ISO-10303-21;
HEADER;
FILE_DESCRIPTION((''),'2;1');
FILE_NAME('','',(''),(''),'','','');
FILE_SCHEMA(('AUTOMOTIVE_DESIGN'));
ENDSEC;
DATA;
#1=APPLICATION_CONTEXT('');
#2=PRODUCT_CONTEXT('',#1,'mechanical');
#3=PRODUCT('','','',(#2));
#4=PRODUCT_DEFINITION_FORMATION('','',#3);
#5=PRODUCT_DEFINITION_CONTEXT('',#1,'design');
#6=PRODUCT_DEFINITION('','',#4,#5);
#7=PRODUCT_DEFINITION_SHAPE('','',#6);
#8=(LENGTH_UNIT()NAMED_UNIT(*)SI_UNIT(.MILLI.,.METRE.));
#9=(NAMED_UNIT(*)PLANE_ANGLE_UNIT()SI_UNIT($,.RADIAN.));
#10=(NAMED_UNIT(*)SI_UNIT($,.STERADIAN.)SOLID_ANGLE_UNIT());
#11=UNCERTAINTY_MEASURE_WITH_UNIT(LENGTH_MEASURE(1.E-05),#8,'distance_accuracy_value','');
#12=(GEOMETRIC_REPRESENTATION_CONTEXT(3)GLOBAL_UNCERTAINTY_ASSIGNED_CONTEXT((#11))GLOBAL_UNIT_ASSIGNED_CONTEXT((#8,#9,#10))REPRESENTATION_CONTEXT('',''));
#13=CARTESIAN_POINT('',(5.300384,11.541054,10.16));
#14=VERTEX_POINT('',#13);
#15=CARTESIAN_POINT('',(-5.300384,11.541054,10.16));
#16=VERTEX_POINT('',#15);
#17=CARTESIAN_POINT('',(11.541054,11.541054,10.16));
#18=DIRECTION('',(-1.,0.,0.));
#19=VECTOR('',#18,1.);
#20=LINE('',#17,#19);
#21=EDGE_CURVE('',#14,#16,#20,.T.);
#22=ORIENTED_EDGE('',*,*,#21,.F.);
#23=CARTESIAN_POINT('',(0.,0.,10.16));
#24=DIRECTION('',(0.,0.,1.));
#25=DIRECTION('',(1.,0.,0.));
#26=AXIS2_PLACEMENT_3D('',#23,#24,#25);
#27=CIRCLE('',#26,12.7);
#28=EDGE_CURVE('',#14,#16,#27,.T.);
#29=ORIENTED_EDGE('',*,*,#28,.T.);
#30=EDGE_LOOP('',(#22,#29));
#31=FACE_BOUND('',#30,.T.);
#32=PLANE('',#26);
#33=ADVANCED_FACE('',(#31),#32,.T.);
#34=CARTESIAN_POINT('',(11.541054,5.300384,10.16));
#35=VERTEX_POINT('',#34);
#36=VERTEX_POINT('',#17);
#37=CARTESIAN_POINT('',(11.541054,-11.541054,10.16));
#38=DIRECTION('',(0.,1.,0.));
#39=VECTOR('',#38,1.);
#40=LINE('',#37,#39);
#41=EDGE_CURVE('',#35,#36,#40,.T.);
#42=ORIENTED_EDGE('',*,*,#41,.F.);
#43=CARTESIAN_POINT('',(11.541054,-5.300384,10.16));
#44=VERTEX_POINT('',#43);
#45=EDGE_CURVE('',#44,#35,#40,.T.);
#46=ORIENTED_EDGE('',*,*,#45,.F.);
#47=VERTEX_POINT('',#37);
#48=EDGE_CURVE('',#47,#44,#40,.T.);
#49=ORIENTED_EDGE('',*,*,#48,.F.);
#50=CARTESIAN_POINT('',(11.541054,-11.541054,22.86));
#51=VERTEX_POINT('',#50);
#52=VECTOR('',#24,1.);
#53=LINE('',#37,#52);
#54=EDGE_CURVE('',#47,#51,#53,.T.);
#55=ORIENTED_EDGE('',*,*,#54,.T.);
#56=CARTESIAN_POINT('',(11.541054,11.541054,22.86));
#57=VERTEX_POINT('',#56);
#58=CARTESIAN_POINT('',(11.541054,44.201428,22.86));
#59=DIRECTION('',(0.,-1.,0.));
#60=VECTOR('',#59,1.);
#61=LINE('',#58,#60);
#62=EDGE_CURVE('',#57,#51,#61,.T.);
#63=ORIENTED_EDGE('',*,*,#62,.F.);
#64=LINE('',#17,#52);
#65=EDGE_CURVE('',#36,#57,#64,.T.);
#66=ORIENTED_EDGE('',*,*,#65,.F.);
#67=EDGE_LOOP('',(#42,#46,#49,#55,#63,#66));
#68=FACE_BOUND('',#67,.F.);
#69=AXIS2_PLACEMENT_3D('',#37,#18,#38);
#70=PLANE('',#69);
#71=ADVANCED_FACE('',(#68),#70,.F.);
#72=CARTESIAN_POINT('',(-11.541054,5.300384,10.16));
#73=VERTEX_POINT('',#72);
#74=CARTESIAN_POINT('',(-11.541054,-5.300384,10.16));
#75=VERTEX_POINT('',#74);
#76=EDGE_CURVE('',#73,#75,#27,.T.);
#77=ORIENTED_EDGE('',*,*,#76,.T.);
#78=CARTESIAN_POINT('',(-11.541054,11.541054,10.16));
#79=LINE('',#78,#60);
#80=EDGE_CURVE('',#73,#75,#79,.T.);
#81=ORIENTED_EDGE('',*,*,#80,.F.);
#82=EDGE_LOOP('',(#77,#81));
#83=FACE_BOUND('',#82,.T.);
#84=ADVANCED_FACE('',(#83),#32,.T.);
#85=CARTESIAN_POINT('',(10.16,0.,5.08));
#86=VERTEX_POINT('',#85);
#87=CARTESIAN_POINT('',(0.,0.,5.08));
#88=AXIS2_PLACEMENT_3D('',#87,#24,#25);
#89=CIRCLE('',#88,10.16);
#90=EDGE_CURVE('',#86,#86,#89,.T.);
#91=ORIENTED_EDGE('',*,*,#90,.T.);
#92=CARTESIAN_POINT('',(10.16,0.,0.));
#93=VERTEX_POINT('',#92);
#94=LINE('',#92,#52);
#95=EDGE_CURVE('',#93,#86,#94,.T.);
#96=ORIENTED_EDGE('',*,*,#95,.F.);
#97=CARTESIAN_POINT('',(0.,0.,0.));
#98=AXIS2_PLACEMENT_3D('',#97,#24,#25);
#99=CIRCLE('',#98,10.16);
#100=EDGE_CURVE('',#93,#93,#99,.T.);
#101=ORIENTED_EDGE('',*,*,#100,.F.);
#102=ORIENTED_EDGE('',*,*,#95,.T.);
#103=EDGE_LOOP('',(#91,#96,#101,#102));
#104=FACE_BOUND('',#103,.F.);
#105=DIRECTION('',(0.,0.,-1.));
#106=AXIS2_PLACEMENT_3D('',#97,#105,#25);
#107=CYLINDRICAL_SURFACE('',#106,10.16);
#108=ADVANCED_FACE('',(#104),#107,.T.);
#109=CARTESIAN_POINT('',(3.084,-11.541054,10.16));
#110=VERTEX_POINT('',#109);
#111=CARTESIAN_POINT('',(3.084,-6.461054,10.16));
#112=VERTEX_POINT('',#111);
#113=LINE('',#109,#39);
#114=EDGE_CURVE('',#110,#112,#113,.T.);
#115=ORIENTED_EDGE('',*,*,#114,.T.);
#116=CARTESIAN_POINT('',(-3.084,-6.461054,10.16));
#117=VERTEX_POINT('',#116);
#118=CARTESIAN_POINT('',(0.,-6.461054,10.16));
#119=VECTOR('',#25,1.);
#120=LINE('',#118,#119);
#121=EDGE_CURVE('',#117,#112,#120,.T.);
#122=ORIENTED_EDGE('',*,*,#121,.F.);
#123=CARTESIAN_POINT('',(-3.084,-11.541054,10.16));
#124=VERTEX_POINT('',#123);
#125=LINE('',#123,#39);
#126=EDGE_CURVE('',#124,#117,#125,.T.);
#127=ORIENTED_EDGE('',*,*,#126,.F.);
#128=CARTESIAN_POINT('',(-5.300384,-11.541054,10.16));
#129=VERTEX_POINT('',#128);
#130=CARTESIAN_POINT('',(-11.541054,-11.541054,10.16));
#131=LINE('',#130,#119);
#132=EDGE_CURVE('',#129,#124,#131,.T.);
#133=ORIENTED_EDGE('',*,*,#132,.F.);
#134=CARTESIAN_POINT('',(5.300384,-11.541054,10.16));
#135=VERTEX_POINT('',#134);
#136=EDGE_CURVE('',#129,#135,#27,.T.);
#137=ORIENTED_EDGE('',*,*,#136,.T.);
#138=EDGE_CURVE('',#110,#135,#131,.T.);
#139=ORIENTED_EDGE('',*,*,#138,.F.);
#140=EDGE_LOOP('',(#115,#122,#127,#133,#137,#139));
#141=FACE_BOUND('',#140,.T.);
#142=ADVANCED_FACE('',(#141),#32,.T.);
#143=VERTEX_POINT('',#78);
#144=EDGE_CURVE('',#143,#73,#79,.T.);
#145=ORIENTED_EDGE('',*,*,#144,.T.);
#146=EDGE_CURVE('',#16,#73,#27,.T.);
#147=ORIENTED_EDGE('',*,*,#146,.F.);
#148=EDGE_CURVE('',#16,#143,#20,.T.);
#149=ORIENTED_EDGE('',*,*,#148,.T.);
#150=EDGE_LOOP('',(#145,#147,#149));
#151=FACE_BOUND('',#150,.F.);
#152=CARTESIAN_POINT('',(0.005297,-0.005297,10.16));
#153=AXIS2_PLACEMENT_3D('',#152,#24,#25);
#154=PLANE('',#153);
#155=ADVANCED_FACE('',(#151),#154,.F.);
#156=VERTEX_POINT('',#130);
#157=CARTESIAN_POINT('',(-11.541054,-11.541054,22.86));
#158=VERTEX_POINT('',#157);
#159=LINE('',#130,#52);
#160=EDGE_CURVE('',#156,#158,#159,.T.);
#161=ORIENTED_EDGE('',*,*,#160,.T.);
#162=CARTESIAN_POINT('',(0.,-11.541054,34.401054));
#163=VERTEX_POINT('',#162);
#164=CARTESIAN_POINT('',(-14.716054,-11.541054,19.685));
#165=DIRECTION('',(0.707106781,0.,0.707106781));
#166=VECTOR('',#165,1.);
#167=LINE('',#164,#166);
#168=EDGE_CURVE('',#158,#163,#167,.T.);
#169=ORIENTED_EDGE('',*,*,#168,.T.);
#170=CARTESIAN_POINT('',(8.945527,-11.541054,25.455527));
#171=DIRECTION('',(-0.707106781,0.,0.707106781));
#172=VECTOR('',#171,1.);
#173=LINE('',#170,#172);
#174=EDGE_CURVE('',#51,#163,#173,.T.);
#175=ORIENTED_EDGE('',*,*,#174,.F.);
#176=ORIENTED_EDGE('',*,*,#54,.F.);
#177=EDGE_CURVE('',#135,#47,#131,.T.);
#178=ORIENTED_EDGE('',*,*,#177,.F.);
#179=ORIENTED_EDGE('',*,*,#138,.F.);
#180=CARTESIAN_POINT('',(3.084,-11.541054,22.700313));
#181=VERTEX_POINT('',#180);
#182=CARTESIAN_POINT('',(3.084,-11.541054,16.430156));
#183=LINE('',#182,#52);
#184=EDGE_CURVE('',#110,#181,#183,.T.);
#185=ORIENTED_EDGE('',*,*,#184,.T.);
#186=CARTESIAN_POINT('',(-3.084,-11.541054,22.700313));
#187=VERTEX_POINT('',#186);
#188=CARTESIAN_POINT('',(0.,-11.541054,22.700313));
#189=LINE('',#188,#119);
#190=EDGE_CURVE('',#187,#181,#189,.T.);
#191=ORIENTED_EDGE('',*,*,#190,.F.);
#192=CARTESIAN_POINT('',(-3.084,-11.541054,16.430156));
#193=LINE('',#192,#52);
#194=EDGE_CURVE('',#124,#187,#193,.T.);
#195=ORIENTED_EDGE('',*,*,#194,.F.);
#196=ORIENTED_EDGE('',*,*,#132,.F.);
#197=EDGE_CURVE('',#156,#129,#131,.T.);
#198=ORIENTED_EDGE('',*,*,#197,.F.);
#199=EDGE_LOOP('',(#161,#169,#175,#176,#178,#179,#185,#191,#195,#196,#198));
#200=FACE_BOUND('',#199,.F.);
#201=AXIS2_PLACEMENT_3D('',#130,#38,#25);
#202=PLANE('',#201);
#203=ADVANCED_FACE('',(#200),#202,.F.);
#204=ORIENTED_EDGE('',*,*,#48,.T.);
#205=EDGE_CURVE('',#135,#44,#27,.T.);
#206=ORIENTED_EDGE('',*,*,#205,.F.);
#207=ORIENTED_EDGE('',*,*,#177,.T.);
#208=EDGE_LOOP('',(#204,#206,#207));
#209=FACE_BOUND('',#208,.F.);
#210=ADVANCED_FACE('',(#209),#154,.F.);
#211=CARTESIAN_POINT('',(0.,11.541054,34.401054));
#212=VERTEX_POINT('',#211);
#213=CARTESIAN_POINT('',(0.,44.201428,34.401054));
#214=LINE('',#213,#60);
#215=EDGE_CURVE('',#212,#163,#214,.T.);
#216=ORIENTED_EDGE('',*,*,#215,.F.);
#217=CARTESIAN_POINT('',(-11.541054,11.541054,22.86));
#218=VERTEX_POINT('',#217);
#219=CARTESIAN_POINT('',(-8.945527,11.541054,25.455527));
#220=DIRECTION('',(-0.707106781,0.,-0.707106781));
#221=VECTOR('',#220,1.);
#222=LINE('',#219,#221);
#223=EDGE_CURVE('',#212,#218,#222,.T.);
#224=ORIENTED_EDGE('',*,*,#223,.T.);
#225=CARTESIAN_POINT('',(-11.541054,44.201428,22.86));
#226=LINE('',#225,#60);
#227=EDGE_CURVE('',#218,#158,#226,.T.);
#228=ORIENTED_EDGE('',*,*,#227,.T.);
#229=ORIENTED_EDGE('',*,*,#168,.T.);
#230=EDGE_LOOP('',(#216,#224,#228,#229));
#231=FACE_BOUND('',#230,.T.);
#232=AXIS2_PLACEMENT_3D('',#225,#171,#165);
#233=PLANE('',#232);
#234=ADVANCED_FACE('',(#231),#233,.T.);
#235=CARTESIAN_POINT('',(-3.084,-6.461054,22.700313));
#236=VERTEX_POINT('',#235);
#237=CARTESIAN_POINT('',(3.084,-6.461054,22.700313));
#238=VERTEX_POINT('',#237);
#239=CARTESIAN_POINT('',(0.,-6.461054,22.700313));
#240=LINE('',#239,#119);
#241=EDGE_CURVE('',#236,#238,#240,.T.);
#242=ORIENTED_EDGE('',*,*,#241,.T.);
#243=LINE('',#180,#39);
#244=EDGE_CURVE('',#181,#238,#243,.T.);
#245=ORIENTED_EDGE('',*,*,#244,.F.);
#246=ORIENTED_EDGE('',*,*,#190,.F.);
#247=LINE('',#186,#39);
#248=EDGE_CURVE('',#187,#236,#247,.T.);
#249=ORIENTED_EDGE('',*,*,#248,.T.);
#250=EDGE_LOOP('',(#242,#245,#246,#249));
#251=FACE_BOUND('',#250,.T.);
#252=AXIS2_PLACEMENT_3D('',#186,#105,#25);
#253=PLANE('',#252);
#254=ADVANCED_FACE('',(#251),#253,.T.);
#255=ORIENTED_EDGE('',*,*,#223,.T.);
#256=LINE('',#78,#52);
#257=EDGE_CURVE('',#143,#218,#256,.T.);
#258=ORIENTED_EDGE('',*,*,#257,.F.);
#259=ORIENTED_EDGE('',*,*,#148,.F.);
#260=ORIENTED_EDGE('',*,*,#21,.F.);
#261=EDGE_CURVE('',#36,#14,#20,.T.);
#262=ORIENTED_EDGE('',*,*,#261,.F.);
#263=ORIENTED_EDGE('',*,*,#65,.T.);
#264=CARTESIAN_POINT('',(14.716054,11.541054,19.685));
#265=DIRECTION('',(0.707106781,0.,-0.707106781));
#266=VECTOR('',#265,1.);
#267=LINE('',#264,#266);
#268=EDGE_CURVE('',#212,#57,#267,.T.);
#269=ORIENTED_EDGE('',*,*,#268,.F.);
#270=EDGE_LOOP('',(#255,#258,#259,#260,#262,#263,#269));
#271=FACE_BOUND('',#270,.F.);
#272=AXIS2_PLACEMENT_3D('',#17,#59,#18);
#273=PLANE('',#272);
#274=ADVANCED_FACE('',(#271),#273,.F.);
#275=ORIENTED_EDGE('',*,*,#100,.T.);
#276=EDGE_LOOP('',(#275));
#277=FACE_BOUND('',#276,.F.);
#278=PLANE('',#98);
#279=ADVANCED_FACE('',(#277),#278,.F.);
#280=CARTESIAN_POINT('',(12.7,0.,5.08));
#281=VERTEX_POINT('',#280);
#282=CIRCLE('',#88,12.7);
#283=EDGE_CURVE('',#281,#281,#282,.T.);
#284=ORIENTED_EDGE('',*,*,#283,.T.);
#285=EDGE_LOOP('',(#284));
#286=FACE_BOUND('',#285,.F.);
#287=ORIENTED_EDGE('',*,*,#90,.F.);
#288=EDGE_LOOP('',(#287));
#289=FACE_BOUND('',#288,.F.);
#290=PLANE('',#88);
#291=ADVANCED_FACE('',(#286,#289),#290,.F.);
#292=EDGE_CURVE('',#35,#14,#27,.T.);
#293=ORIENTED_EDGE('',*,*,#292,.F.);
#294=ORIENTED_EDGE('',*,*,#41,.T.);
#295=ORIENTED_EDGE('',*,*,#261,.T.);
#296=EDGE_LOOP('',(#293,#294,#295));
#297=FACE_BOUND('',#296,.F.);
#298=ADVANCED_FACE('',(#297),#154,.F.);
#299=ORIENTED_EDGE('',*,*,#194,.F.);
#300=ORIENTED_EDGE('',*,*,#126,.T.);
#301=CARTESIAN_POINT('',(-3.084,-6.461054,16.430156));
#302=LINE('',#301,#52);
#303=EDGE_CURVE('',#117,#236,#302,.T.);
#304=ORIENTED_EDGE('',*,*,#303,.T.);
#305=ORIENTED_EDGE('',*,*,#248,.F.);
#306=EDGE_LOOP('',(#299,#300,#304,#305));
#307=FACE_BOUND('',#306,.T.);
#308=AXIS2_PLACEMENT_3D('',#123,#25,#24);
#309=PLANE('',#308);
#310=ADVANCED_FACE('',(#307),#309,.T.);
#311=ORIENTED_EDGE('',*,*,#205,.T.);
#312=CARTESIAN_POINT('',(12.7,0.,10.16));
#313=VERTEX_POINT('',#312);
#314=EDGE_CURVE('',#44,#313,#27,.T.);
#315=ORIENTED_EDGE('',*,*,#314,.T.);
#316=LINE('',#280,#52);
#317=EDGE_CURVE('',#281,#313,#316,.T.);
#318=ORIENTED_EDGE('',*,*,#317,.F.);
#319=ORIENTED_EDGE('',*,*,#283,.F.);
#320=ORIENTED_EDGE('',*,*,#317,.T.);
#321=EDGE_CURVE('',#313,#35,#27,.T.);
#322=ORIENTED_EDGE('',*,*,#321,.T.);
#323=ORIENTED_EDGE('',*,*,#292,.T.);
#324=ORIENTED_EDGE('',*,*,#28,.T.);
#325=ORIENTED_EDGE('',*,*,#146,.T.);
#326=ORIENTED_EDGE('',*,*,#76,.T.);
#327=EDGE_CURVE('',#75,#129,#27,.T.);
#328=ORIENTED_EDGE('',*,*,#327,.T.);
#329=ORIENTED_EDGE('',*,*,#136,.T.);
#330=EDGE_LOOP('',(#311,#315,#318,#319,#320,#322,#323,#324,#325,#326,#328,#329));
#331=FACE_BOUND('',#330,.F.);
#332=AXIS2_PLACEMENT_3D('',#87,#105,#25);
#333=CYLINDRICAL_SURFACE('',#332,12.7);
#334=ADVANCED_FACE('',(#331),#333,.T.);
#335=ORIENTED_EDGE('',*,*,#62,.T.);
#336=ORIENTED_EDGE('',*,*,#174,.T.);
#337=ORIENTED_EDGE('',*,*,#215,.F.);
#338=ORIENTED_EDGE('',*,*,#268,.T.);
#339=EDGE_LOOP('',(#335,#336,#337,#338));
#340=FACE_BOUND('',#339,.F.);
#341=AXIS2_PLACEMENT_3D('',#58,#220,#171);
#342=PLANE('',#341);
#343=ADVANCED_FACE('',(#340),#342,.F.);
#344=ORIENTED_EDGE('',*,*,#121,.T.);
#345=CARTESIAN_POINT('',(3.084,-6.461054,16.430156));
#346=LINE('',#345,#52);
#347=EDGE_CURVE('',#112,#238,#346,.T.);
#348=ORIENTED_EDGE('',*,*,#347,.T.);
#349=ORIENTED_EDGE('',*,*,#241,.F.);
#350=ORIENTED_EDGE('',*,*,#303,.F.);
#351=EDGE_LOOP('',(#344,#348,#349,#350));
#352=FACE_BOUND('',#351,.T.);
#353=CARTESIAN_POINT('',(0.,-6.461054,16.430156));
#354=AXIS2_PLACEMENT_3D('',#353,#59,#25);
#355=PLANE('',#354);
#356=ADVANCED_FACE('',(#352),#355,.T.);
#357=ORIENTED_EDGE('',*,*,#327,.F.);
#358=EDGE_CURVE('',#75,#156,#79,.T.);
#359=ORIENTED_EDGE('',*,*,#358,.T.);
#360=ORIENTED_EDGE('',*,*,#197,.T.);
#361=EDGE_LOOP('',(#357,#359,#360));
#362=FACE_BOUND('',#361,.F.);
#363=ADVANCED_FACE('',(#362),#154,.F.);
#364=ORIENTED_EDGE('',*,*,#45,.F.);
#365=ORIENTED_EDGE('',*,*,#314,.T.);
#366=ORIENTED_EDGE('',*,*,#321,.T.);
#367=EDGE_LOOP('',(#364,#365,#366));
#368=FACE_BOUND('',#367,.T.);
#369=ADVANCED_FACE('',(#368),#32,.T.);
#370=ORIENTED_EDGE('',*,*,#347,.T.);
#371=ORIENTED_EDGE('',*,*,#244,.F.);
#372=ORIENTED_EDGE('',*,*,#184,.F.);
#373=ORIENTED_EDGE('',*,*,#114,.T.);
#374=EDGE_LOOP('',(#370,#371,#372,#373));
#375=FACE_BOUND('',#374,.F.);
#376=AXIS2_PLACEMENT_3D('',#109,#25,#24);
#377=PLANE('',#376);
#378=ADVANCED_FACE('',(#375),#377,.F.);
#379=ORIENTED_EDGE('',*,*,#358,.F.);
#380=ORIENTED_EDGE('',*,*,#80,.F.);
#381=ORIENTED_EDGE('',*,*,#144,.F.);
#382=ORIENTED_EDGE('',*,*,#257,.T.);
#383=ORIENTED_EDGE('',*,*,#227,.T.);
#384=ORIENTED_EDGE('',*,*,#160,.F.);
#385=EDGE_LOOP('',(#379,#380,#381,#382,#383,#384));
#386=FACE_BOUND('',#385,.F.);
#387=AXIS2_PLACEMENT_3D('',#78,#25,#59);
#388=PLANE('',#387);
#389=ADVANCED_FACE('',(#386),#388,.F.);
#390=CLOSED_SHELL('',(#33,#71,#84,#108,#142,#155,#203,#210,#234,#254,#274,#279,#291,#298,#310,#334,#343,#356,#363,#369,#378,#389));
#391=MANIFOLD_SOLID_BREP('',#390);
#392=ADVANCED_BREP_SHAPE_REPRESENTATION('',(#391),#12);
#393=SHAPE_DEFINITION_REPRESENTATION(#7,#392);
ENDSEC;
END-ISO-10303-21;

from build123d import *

# Parameters (mm, degrees)
F0_R        = 10.16
F1_DEPTH    = 5.08
F2_R        = 12.7
F2_R_2      = 10.16
F3_DEPTH    = 5.08
F5_DEPTH    = 25.4
F6_T1_DEPTH = 88.4028561312
F7_W        = 6.1679999344
F7_H        = 12.5403126109
F8_DEPTH    = 5.08


# Not quite as in the source:
# - a fillet or chamfer that OpenCascade refuses, or shapes differently, is made with other operations: its cross-section is extruded or revolved along the edge and cut away or added


with BuildPart() as f1:
    # F0 (on Top) → F1 (new body)
    with BuildSketch(Plane.XY):
        Circle(F0_R)
    extrude(amount=F1_DEPTH)

    # F2 (on face) → F3 (join)
    with BuildSketch(Plane.XY.offset(5.08)):
        Circle(F2_R)
        Circle(F2_R_2, mode=Mode.SUBTRACT)
        Circle(F2_R_2)
    extrude(amount=F3_DEPTH)

    # F4 (on face) → F5 (join)
    with BuildSketch(Plane.XY.offset(10.16)):
        with BuildLine():
            Line((-5.3003839328, -11.5410541184), (0, -11.5410541184))
            Line((0, -11.5410541184), (5.3003839328, -11.5410541184))
            ThreePointArc((5.3003839328, -11.5410541184), (7.254211996, -10.4243181224), (8.9802561211, -8.9802561211))
            ThreePointArc((8.9802561211, -8.9802561211), (10.4243181224, -7.254211996), (11.5410541184, -5.3003839328))
            Line((11.5410541184, -5.3003839328), (11.5410541184, 0))
            Line((11.5410541184, 0), (11.5410541184, 5.3003839328))
            ThreePointArc((11.5410541184, 5.3003839328), (8.9802561211, 8.9802561211), (5.3003839328, 11.5410541184))
            Line((5.3003839328, 11.5410541184), (-5.3003839328, 11.5410541184))
            ThreePointArc((-5.3003839328, 11.5410541184), (-8.9802561211, 8.9802561211), (-11.5410541184, 5.3003839328))
            Line((-11.5410541184, 5.3003839328), (-11.5410541184, -5.3003839328))
            ThreePointArc((-11.5410541184, -5.3003839328), (-8.9802561211, -8.9802561211), (-5.3003839328, -11.5410541184))
        make_face()
        with BuildLine():
            Line((-11.5410541184, -11.5410541184), (-5.3003839328, -11.5410541184))
            ThreePointArc((-5.3003839328, -11.5410541184), (-8.9802561211, -8.9802561211), (-11.5410541184, -5.3003839328))
            Line((-11.5410541184, -5.3003839328), (-11.5410541184, -11.5410541184))
        make_face()
        with BuildLine():
            Line((8.9802561211, -8.9802561211), (11.5410541184, -11.5410541184))
            Line((11.5410541184, -11.5410541184), (11.5410541184, -5.3003839328))
            ThreePointArc((11.5410541184, -5.3003839328), (10.4243181224, -7.254211996), (8.9802561211, -8.9802561211))
        make_face()
        with BuildLine():
            ThreePointArc((8.9802561211, -8.9802561211), (7.254211996, -10.4243181224), (5.3003839328, -11.5410541184))
            Line((5.3003839328, -11.5410541184), (11.5410541184, -11.5410541184))
            Line((11.5410541184, -11.5410541184), (8.9802561211, -8.9802561211))
        make_face()
        with BuildLine():
            Line((-11.5410541184, 11.5410541184), (-11.5410541184, 5.3003839328))
            ThreePointArc((-11.5410541184, 5.3003839328), (-8.9802561211, 8.9802561211), (-5.3003839328, 11.5410541184))
            Line((-5.3003839328, 11.5410541184), (-11.5410541184, 11.5410541184))
        make_face()
        with BuildLine():
            ThreePointArc((5.3003839328, 11.5410541184), (8.9802561211, 8.9802561211), (11.5410541184, 5.3003839328))
            Line((11.5410541184, 5.3003839328), (11.5410541184, 11.5410541184))
            Line((11.5410541184, 11.5410541184), (5.3003839328, 11.5410541184))
        make_face()
    extrude(amount=F5_DEPTH)

    # F6: chamfer of 12.7 on 2 edges, made by hand

    # F6_s2 → F6_t1 (cut)
    with BuildSketch(Plane.XZ.offset(-44.2014280656)):
        Polygon((11.5410541184, 22.86), (-1.1589458816, 35.56), (11.5410541184, 35.56), align=None)
        Polygon((-11.5410541184, 22.86), (1.1589458816, 35.56), (-11.5410541184, 35.56), align=None)
    extrude(amount=F6_T1_DEPTH, mode=Mode.SUBTRACT)

    # F7 (on face) → F8 (cut)
    with BuildSketch(Plane.XZ.offset(11.5410541184)):
        with Locations((0, 16.4301563054)):
            Rectangle(F7_W, F7_H)
    extrude(amount=-F8_DEPTH, mode=Mode.SUBTRACT)


solid = f1.part
